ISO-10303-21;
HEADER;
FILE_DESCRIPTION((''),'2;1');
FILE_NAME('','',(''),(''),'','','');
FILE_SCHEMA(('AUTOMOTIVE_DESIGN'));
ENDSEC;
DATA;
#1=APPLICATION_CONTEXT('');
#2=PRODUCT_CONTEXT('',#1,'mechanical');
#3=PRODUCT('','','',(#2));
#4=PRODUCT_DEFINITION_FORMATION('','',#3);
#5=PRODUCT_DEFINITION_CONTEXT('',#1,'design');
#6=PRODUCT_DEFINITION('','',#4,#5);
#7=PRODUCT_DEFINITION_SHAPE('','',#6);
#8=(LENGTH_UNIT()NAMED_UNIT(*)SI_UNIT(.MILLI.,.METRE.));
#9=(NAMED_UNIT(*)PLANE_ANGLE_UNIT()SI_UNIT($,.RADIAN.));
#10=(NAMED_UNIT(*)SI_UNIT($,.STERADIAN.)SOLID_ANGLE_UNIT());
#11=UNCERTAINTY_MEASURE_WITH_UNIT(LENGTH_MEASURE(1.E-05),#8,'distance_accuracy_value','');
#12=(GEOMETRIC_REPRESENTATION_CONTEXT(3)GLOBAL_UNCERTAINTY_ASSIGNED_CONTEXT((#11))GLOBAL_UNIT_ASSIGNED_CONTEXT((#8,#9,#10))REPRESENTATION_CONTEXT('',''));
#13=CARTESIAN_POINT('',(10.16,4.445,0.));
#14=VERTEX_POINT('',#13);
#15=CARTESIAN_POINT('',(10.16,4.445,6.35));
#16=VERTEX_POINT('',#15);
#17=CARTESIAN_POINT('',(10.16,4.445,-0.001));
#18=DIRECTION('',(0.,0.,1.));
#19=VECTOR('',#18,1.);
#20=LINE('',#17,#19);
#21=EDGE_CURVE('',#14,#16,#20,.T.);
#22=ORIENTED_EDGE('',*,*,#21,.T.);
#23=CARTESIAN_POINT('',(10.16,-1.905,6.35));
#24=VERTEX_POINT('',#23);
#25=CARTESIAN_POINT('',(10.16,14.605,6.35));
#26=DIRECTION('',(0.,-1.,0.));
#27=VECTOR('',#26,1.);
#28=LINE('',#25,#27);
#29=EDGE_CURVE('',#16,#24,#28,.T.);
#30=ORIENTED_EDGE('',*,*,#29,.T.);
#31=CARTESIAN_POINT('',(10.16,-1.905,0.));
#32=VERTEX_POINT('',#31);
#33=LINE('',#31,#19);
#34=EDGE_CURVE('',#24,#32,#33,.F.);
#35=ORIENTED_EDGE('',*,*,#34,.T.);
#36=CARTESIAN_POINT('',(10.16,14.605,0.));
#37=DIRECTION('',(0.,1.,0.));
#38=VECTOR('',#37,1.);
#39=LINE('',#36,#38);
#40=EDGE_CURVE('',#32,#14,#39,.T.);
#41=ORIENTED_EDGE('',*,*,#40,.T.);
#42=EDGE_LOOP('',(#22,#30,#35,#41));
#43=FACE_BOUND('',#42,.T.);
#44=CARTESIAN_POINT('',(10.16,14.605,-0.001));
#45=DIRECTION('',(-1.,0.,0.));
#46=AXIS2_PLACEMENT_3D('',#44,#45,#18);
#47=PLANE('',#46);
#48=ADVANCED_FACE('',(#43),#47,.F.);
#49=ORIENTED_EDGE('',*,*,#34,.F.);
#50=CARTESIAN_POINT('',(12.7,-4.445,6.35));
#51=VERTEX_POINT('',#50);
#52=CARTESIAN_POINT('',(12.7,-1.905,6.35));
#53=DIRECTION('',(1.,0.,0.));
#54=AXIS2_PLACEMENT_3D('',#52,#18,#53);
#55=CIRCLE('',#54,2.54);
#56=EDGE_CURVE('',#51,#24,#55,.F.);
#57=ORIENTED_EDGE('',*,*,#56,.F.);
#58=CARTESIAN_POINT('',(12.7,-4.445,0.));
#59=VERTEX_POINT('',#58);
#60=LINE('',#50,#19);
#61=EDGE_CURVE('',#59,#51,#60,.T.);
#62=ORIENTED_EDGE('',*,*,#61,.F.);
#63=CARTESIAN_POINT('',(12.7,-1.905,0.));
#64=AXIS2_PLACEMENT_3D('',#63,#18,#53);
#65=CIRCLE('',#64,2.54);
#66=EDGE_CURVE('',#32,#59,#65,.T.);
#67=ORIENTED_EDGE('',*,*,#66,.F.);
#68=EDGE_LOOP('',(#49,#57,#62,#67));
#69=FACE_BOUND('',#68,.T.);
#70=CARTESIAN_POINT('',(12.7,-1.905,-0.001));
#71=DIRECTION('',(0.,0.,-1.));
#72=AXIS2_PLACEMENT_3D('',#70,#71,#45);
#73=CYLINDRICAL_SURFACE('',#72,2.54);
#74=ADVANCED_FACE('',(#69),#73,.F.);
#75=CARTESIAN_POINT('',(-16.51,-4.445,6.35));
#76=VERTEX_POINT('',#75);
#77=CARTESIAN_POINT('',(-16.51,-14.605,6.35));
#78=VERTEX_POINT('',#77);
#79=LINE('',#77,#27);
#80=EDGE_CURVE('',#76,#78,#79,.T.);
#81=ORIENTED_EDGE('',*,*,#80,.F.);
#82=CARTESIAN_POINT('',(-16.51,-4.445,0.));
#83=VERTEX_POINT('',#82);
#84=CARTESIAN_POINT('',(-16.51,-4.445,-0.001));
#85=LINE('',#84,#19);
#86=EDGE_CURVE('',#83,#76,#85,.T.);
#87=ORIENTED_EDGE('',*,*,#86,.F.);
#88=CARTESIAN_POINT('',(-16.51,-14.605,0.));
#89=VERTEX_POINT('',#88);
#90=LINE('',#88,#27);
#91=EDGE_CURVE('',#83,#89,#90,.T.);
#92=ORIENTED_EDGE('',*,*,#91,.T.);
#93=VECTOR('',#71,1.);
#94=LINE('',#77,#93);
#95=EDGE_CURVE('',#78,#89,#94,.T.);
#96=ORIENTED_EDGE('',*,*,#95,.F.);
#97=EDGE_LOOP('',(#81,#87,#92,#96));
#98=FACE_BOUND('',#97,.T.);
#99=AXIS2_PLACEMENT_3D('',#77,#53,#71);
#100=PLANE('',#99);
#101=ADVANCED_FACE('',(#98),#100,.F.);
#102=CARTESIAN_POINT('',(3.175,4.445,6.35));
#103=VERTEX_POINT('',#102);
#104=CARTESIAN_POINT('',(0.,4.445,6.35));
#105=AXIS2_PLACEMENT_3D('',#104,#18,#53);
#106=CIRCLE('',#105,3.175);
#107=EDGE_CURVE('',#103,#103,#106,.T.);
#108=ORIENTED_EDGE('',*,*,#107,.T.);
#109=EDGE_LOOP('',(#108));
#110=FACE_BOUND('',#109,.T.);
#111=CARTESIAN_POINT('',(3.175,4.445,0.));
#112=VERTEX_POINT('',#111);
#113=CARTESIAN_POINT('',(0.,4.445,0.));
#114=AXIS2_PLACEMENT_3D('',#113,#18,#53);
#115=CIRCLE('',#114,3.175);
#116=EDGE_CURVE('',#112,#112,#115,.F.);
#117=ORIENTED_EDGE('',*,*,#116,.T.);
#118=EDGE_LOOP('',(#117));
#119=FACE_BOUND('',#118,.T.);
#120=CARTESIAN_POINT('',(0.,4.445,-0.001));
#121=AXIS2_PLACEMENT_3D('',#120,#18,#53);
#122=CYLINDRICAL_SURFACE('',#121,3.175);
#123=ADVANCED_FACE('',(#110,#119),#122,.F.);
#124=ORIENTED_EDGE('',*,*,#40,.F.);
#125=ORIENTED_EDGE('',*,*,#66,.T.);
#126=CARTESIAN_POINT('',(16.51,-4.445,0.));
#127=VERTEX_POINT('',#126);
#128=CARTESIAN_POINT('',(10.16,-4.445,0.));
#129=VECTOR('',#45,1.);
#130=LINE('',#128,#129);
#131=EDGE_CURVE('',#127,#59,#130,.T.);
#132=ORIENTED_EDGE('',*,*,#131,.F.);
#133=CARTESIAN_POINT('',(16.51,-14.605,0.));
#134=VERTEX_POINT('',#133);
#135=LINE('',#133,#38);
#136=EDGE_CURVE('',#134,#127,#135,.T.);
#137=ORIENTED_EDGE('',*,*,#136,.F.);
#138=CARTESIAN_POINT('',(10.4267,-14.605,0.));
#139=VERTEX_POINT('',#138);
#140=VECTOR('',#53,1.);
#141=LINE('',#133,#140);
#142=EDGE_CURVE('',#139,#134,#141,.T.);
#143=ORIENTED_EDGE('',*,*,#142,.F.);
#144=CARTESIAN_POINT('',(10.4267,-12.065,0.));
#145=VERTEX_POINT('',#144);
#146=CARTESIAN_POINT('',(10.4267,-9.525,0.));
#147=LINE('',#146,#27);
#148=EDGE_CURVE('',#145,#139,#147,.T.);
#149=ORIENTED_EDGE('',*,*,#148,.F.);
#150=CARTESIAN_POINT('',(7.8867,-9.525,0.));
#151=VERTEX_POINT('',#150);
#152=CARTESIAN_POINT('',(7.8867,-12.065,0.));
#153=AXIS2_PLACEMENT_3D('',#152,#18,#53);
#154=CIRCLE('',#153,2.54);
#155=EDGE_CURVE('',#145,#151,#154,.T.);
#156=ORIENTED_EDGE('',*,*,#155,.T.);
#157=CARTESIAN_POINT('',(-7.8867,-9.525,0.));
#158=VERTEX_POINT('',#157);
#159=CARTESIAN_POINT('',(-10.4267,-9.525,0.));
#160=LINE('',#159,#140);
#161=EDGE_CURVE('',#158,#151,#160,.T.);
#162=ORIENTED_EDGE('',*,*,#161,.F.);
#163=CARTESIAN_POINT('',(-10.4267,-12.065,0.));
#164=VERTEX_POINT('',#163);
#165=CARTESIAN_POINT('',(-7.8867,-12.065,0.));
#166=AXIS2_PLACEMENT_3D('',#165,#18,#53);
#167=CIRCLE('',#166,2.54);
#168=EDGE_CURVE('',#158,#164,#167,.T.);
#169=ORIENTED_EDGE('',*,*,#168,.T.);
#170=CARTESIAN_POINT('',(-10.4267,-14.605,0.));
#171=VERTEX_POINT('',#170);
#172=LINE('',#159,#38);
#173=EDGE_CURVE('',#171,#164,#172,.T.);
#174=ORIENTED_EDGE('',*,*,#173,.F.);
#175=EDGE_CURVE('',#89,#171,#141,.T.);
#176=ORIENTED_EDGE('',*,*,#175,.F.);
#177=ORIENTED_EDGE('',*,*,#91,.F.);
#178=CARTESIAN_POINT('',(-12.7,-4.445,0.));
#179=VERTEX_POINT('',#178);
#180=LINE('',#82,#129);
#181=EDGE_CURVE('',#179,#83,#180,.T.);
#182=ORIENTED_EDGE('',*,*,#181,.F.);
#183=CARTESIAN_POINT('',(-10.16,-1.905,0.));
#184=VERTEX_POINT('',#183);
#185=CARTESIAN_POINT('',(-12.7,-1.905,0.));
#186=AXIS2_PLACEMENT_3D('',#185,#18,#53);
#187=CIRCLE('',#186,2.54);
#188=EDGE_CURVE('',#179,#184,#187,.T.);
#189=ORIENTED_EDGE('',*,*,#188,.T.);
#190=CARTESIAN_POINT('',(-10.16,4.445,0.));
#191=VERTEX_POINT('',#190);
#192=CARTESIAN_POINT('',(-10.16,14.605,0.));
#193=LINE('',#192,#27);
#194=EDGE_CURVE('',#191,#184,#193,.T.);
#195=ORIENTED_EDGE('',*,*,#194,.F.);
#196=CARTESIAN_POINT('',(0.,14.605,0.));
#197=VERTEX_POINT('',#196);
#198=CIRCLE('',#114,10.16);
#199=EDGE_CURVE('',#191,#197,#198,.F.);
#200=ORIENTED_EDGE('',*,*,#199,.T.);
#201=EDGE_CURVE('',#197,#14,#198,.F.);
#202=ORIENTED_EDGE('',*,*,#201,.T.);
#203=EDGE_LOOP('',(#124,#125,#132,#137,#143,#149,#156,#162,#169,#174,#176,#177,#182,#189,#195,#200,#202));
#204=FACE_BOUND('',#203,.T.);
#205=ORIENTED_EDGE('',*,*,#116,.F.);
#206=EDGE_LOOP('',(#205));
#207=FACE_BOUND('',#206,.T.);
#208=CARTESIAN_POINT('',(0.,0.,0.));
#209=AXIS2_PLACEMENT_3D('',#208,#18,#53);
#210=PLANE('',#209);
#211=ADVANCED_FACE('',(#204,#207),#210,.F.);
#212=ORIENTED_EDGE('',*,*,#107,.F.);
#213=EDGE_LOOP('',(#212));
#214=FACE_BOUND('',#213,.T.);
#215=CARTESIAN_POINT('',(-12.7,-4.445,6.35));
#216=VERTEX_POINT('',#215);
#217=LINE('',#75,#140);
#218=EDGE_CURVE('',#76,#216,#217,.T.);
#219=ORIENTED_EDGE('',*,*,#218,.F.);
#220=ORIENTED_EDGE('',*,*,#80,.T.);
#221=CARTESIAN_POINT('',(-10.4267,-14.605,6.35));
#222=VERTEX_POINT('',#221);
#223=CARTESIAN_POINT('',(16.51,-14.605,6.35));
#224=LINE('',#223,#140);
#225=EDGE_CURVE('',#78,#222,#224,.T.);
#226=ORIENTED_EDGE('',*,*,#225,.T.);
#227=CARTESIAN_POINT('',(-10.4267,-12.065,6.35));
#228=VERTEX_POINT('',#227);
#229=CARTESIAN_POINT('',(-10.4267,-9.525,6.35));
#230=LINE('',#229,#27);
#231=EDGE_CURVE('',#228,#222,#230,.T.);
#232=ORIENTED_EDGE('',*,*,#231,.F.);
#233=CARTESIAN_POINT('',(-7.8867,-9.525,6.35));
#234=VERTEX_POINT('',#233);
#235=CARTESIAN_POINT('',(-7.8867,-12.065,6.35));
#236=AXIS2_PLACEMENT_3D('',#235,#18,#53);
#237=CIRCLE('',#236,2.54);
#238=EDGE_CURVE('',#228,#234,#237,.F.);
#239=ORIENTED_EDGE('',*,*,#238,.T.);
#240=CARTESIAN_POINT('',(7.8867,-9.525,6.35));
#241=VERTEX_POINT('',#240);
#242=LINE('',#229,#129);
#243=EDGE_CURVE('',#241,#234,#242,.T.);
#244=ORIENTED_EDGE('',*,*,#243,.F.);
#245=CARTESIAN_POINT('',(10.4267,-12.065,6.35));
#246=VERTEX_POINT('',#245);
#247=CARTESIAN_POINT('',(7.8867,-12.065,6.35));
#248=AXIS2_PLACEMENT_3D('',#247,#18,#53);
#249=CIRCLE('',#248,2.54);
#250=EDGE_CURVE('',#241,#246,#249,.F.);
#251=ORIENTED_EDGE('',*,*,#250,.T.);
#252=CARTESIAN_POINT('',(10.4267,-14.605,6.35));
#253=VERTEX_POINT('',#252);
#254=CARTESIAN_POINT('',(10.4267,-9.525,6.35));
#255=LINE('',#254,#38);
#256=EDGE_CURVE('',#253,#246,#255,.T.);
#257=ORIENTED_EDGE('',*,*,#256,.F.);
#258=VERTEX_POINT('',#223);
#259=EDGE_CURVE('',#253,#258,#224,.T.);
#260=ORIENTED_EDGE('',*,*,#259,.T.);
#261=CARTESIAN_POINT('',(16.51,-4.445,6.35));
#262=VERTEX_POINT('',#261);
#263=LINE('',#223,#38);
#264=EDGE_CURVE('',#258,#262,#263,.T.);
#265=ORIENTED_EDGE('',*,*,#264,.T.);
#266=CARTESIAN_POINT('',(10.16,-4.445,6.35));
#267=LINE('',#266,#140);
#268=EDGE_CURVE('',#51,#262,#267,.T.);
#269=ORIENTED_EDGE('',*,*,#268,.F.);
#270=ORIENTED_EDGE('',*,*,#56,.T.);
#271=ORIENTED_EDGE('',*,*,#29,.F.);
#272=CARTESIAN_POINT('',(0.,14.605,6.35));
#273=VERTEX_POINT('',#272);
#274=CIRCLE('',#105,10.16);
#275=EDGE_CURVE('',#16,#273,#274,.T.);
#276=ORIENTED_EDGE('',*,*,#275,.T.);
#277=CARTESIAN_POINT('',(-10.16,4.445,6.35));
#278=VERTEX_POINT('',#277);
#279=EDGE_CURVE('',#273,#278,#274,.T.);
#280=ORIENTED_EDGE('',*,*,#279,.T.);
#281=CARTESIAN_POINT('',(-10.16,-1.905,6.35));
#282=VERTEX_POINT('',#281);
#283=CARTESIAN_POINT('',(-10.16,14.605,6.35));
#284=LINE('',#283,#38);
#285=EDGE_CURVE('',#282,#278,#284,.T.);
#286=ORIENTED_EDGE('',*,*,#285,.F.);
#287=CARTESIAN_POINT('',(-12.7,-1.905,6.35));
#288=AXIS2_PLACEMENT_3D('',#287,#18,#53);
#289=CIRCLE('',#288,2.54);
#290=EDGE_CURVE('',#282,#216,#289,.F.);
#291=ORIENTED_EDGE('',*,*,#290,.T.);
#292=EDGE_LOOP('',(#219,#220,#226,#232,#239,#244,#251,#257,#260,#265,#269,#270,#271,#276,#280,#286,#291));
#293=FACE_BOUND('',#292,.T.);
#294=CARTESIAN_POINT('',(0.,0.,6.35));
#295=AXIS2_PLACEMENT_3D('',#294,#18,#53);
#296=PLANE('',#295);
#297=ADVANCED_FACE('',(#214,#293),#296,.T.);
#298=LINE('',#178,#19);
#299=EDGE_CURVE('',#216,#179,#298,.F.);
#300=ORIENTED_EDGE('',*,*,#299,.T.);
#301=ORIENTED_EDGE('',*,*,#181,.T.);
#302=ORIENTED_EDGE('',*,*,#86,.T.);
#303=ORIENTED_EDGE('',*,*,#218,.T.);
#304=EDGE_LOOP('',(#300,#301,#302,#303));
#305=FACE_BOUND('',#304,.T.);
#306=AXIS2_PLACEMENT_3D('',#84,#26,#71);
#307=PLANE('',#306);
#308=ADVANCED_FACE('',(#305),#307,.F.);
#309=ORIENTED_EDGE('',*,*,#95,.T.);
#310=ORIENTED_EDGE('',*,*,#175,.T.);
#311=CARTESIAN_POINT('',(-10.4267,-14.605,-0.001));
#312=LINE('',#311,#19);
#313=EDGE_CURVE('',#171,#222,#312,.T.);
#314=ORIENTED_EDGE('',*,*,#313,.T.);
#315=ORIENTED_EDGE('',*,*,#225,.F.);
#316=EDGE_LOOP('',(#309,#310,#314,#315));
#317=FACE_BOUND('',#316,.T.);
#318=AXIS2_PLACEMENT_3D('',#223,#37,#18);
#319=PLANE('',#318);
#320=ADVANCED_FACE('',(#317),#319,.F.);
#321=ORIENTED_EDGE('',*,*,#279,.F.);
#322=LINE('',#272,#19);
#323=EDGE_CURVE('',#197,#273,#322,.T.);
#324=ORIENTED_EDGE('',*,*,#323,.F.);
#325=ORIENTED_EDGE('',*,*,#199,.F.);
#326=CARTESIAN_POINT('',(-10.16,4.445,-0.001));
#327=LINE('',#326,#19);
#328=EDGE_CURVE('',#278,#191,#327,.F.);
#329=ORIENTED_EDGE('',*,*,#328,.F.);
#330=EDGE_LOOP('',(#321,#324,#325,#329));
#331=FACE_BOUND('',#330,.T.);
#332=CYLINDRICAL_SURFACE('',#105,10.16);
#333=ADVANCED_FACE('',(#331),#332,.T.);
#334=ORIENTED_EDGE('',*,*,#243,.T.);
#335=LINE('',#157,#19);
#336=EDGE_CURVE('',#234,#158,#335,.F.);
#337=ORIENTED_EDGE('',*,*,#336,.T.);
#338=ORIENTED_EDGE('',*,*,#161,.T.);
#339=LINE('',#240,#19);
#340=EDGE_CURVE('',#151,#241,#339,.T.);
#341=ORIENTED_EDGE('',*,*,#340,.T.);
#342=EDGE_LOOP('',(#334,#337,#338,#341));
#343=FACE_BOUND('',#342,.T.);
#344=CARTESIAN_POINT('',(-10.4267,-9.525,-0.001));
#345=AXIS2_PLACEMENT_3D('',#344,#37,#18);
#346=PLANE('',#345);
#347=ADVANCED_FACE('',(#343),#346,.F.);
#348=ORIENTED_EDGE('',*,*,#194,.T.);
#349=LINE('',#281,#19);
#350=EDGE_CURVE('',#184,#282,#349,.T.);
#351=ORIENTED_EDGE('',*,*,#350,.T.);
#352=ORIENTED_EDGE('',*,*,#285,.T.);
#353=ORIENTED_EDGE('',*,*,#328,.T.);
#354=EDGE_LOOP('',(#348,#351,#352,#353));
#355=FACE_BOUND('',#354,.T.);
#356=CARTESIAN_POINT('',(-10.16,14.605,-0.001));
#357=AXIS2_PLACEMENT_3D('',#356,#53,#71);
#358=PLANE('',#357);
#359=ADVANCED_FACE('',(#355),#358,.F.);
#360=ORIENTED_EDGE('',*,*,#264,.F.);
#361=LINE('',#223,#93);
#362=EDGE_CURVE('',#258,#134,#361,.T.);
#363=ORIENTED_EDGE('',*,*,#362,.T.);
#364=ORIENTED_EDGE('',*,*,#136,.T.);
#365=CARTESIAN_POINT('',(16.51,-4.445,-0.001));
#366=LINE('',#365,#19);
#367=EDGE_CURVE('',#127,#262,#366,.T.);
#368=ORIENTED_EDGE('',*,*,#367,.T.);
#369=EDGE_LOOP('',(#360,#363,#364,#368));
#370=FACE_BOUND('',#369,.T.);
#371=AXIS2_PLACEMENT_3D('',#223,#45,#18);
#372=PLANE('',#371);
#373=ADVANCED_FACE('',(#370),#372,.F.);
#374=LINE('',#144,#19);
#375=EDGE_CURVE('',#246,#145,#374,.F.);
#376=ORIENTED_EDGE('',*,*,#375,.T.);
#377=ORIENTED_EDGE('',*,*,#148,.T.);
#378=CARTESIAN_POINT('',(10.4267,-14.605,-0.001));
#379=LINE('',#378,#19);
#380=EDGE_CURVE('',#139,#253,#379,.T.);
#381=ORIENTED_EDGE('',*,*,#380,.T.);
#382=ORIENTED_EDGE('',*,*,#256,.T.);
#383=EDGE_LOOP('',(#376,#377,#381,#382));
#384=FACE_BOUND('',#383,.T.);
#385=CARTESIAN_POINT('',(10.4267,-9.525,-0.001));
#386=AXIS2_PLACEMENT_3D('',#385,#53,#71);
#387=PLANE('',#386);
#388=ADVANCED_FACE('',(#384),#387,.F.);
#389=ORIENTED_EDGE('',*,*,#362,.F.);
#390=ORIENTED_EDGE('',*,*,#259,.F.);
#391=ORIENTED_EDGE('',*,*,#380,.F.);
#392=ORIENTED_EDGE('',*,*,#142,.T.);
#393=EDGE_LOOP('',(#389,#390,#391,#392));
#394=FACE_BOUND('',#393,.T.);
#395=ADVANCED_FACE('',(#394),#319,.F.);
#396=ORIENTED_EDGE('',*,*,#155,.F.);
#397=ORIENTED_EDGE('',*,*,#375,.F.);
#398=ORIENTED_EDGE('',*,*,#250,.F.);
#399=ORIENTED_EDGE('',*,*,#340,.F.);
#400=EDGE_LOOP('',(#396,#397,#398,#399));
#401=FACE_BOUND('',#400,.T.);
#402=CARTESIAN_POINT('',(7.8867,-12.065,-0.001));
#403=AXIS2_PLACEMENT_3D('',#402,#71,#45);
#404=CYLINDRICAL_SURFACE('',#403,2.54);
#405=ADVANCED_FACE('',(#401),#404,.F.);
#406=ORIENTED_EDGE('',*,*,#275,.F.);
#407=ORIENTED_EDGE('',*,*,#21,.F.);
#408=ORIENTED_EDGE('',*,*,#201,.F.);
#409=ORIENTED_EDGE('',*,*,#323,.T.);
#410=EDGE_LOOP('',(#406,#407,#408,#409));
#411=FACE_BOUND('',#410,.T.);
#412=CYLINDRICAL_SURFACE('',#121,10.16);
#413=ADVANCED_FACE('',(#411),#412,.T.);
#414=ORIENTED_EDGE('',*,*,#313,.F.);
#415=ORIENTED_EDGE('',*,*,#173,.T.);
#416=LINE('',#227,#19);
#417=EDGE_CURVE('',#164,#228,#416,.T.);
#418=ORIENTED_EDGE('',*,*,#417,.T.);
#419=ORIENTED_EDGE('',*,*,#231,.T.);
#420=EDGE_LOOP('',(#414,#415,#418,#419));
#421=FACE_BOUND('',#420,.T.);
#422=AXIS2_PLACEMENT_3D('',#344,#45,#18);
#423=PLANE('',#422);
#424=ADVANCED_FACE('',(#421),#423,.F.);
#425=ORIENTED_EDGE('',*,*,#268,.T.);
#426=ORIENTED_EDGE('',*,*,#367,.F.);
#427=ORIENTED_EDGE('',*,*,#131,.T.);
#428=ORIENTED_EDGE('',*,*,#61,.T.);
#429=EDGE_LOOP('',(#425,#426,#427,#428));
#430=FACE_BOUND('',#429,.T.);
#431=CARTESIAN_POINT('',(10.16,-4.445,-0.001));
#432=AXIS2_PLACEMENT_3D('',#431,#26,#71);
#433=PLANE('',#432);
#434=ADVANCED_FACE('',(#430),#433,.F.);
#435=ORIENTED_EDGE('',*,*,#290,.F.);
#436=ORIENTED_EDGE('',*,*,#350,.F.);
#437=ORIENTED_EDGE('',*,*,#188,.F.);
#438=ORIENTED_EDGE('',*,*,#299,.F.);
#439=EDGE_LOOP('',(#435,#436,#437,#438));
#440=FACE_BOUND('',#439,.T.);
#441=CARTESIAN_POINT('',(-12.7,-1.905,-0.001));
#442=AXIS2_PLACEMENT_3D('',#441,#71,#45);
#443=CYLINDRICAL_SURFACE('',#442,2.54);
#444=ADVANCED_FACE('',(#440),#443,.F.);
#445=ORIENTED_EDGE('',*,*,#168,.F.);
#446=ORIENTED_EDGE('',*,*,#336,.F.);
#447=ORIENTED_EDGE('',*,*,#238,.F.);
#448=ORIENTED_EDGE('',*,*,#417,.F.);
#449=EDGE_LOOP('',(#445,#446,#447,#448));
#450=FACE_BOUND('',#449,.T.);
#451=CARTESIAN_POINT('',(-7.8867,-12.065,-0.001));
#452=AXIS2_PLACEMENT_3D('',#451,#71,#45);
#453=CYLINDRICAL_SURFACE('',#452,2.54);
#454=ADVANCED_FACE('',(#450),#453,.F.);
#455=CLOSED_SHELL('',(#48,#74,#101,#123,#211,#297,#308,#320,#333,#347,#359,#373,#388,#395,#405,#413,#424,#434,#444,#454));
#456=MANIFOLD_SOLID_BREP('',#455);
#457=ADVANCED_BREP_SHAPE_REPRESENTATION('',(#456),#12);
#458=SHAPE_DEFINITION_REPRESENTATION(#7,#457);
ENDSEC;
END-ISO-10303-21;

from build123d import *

# Parameters (mm, degrees)
SKETCH1_W           = 33.02
SKETCH1_H           = 29.21
BOSS_EXTRUDE1_DEPTH = 6.35
CUT_EXTRUDE1_REACH  = 24.939
SKETCH3_R           = 3.175
SKETCH3_W           = 6.35
SKETCH3_H           = 19.05
SKETCH3_W_2         = 20.8534
SKETCH3_H_2         = 5.08
FILLET1_R           = 10.16
FILLET2_R           = 2.54


with BuildPart() as part:
    # Sketch1 → Boss-Extrude1 (new body)
    with BuildSketch(Plane.XY):
        Rectangle(SKETCH1_W, SKETCH1_H)
    extrude(amount=BOSS_EXTRUDE1_DEPTH)

    # Sketch3 → Cut-Extrude1 (cut, up to next)
    with BuildSketch(Plane.XY.offset(6.35), mode=Mode.PRIVATE) as cut_extrude1_sk1:
        with Locations((0, 4.445)):
            Circle(SKETCH3_R)
    cut_extrude1_tool1 = extrude(cut_extrude1_sk1.sketch, amount=-CUT_EXTRUDE1_REACH, mode=Mode.PRIVATE) & part.part
    # Sketch3 → Cut-Extrude1 (cut, up to next)
    with BuildSketch(Plane.XY.offset(6.35), mode=Mode.PRIVATE) as cut_extrude1_sk2:
        with Locations((-13.335, 5.08)):
            Rectangle(SKETCH3_W, SKETCH3_H)
    cut_extrude1_tool2 = extrude(cut_extrude1_sk2.sketch, amount=-CUT_EXTRUDE1_REACH, mode=Mode.PRIVATE) & part.part
    # Sketch3 → Cut-Extrude1 (cut, up to next)
    with BuildSketch(Plane.XY.offset(6.35), mode=Mode.PRIVATE) as cut_extrude1_sk3:
        with Locations((13.335, 5.08)):
            Rectangle(SKETCH3_W, SKETCH3_H)
    cut_extrude1_tool3 = extrude(cut_extrude1_sk3.sketch, amount=-CUT_EXTRUDE1_REACH, mode=Mode.PRIVATE) & part.part
    # Sketch3 → Cut-Extrude1 (cut, up to next)
    with BuildSketch(Plane.XY.offset(6.35), mode=Mode.PRIVATE) as cut_extrude1_sk4:
        with Locations((0, -12.065)):
            Rectangle(SKETCH3_W_2, SKETCH3_H_2)
    cut_extrude1_tool4 = extrude(cut_extrude1_sk4.sketch, amount=-CUT_EXTRUDE1_REACH, mode=Mode.PRIVATE) & part.part
    add(cut_extrude1_tool1.solids().sort_by_distance((0, 4.445, 6.35))[0], mode=Mode.SUBTRACT)
    add(cut_extrude1_tool2.solids().sort_by_distance((-13.335, 5.08, 6.35))[0], mode=Mode.SUBTRACT)
    add(cut_extrude1_tool3.solids().sort_by_distance((13.335, 5.08, 6.35))[0], mode=Mode.SUBTRACT)
    add(cut_extrude1_tool4.solids().sort_by_distance((0, -12.065, 6.35))[0], mode=Mode.SUBTRACT)

    # Fillet1
    fillet1_edges = [part.edges().sort_by_distance(p)[0] for p in [
        (10.16, 14.605, 3.175),
        (-10.16, 14.605, 3.175),
    ]]
    fillet(fillet1_edges, radius=FILLET1_R - 0.0001)  # a hair under: the kernel refuses the full size

    # Fillet2
    fillet2_edges = [part.edges().sort_by_distance(p)[0] for p in [
        (10.16, -4.445, 3.175),
        (-10.4267, -9.525, 3.175),
        (10.4267, -9.525, 3.175),
        (-10.16, -4.445, 3.175),
    ]]
    fillet(fillet2_edges, radius=FILLET2_R)


solid = part.part
